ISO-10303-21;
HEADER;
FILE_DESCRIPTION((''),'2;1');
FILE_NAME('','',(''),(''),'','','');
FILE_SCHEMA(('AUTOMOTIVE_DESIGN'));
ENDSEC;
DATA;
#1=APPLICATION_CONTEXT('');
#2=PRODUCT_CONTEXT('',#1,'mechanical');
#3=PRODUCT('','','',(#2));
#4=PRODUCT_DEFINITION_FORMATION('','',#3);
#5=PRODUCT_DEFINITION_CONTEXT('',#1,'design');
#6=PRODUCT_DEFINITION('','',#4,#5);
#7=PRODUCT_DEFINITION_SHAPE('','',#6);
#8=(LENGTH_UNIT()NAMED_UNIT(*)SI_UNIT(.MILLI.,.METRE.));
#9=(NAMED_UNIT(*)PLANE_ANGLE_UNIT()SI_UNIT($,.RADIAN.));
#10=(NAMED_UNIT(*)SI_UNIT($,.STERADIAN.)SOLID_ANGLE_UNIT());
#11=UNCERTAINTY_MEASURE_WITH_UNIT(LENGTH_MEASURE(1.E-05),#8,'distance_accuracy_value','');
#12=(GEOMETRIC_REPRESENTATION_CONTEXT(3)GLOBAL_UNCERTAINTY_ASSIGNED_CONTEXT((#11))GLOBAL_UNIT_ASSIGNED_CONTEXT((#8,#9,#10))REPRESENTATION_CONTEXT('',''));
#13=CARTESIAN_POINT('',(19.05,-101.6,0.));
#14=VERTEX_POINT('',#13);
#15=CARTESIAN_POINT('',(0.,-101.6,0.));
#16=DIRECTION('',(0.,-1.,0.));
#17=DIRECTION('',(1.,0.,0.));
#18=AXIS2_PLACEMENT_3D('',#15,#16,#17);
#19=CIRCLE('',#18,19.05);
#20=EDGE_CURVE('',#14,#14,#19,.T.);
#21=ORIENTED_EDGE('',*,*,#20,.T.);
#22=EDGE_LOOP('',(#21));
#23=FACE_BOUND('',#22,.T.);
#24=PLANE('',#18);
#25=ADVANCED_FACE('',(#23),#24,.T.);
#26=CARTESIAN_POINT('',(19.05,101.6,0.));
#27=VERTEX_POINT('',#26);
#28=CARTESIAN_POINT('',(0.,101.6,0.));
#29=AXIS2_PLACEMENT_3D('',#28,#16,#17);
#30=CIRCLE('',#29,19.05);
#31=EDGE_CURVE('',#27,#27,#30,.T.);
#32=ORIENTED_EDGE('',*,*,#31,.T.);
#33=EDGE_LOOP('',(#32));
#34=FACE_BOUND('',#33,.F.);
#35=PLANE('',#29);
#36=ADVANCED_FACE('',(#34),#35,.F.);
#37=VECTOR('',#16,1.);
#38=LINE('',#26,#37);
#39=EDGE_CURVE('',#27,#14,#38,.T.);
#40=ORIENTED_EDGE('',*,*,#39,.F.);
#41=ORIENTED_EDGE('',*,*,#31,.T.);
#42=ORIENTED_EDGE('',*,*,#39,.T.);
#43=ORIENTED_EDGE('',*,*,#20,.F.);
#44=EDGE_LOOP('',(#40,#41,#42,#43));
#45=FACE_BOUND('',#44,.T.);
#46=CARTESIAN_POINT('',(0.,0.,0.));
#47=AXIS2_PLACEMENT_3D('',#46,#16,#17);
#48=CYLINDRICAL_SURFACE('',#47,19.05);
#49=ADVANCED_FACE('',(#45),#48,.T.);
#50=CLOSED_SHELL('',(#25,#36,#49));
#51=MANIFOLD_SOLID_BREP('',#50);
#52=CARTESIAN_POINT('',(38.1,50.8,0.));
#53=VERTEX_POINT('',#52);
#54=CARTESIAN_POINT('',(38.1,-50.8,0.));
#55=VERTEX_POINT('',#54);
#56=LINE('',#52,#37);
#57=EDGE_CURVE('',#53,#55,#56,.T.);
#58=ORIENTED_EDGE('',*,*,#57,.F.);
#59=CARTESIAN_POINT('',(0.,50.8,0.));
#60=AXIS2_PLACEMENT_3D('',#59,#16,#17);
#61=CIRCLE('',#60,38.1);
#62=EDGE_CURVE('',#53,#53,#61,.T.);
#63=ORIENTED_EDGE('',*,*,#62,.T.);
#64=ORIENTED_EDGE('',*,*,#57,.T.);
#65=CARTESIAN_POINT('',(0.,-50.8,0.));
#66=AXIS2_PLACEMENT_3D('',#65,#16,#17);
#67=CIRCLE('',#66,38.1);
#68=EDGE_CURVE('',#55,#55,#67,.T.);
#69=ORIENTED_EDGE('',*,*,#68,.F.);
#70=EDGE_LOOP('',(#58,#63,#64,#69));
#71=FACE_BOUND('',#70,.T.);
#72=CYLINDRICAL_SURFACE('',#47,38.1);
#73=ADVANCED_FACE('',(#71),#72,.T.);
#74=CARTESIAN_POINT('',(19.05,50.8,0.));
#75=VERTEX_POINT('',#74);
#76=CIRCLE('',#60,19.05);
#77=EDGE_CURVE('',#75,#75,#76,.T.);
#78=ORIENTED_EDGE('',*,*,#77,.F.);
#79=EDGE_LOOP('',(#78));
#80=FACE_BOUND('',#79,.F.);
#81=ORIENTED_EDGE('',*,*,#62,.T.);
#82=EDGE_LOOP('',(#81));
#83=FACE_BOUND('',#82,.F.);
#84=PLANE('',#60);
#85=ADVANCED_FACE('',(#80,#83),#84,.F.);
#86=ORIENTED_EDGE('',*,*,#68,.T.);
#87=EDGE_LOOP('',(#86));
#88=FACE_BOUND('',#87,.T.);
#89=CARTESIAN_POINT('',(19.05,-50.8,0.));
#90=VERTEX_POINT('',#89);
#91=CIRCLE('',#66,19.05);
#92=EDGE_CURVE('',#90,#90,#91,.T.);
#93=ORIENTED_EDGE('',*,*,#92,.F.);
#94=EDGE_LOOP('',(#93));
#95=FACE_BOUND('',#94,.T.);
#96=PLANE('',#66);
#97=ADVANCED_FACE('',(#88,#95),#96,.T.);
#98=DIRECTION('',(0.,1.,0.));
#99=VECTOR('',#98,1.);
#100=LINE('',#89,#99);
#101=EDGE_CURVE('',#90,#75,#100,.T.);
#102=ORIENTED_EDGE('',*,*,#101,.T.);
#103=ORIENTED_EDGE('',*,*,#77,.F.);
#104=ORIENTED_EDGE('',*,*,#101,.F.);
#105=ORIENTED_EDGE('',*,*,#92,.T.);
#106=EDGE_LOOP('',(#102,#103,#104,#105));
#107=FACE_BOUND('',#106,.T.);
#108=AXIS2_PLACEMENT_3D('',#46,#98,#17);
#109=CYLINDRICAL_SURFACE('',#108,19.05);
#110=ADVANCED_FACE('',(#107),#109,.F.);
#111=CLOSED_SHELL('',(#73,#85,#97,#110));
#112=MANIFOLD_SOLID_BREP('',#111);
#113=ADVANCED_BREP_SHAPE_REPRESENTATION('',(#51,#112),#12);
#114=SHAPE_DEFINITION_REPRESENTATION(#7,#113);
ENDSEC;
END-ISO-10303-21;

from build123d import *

# Parameters (mm, degrees)
F0_R     = 38.1
F0_R_2   = 19.05
F1_DEPTH = 50.8
F2_R     = 19.05
F3_DEPTH = 101.6


# Not quite as in the source:
# - a feature names something its author has since deleted; it is built from what else it names


with BuildPart() as f1:
    # F0 (on Front) → F1 (new body, symmetric)
    with BuildSketch(Plane.XZ):
        Circle(F0_R)
        Circle(F0_R_2, mode=Mode.SUBTRACT)
    extrude(amount=F1_DEPTH, both=True)


with BuildPart() as f3:
    # F2 (on face) → F3 (new body, symmetric)
    with BuildSketch(Plane.XZ):
        Circle(F2_R)
    extrude(amount=F3_DEPTH, both=True)


solid = Compound([f1.part, f3.part])
